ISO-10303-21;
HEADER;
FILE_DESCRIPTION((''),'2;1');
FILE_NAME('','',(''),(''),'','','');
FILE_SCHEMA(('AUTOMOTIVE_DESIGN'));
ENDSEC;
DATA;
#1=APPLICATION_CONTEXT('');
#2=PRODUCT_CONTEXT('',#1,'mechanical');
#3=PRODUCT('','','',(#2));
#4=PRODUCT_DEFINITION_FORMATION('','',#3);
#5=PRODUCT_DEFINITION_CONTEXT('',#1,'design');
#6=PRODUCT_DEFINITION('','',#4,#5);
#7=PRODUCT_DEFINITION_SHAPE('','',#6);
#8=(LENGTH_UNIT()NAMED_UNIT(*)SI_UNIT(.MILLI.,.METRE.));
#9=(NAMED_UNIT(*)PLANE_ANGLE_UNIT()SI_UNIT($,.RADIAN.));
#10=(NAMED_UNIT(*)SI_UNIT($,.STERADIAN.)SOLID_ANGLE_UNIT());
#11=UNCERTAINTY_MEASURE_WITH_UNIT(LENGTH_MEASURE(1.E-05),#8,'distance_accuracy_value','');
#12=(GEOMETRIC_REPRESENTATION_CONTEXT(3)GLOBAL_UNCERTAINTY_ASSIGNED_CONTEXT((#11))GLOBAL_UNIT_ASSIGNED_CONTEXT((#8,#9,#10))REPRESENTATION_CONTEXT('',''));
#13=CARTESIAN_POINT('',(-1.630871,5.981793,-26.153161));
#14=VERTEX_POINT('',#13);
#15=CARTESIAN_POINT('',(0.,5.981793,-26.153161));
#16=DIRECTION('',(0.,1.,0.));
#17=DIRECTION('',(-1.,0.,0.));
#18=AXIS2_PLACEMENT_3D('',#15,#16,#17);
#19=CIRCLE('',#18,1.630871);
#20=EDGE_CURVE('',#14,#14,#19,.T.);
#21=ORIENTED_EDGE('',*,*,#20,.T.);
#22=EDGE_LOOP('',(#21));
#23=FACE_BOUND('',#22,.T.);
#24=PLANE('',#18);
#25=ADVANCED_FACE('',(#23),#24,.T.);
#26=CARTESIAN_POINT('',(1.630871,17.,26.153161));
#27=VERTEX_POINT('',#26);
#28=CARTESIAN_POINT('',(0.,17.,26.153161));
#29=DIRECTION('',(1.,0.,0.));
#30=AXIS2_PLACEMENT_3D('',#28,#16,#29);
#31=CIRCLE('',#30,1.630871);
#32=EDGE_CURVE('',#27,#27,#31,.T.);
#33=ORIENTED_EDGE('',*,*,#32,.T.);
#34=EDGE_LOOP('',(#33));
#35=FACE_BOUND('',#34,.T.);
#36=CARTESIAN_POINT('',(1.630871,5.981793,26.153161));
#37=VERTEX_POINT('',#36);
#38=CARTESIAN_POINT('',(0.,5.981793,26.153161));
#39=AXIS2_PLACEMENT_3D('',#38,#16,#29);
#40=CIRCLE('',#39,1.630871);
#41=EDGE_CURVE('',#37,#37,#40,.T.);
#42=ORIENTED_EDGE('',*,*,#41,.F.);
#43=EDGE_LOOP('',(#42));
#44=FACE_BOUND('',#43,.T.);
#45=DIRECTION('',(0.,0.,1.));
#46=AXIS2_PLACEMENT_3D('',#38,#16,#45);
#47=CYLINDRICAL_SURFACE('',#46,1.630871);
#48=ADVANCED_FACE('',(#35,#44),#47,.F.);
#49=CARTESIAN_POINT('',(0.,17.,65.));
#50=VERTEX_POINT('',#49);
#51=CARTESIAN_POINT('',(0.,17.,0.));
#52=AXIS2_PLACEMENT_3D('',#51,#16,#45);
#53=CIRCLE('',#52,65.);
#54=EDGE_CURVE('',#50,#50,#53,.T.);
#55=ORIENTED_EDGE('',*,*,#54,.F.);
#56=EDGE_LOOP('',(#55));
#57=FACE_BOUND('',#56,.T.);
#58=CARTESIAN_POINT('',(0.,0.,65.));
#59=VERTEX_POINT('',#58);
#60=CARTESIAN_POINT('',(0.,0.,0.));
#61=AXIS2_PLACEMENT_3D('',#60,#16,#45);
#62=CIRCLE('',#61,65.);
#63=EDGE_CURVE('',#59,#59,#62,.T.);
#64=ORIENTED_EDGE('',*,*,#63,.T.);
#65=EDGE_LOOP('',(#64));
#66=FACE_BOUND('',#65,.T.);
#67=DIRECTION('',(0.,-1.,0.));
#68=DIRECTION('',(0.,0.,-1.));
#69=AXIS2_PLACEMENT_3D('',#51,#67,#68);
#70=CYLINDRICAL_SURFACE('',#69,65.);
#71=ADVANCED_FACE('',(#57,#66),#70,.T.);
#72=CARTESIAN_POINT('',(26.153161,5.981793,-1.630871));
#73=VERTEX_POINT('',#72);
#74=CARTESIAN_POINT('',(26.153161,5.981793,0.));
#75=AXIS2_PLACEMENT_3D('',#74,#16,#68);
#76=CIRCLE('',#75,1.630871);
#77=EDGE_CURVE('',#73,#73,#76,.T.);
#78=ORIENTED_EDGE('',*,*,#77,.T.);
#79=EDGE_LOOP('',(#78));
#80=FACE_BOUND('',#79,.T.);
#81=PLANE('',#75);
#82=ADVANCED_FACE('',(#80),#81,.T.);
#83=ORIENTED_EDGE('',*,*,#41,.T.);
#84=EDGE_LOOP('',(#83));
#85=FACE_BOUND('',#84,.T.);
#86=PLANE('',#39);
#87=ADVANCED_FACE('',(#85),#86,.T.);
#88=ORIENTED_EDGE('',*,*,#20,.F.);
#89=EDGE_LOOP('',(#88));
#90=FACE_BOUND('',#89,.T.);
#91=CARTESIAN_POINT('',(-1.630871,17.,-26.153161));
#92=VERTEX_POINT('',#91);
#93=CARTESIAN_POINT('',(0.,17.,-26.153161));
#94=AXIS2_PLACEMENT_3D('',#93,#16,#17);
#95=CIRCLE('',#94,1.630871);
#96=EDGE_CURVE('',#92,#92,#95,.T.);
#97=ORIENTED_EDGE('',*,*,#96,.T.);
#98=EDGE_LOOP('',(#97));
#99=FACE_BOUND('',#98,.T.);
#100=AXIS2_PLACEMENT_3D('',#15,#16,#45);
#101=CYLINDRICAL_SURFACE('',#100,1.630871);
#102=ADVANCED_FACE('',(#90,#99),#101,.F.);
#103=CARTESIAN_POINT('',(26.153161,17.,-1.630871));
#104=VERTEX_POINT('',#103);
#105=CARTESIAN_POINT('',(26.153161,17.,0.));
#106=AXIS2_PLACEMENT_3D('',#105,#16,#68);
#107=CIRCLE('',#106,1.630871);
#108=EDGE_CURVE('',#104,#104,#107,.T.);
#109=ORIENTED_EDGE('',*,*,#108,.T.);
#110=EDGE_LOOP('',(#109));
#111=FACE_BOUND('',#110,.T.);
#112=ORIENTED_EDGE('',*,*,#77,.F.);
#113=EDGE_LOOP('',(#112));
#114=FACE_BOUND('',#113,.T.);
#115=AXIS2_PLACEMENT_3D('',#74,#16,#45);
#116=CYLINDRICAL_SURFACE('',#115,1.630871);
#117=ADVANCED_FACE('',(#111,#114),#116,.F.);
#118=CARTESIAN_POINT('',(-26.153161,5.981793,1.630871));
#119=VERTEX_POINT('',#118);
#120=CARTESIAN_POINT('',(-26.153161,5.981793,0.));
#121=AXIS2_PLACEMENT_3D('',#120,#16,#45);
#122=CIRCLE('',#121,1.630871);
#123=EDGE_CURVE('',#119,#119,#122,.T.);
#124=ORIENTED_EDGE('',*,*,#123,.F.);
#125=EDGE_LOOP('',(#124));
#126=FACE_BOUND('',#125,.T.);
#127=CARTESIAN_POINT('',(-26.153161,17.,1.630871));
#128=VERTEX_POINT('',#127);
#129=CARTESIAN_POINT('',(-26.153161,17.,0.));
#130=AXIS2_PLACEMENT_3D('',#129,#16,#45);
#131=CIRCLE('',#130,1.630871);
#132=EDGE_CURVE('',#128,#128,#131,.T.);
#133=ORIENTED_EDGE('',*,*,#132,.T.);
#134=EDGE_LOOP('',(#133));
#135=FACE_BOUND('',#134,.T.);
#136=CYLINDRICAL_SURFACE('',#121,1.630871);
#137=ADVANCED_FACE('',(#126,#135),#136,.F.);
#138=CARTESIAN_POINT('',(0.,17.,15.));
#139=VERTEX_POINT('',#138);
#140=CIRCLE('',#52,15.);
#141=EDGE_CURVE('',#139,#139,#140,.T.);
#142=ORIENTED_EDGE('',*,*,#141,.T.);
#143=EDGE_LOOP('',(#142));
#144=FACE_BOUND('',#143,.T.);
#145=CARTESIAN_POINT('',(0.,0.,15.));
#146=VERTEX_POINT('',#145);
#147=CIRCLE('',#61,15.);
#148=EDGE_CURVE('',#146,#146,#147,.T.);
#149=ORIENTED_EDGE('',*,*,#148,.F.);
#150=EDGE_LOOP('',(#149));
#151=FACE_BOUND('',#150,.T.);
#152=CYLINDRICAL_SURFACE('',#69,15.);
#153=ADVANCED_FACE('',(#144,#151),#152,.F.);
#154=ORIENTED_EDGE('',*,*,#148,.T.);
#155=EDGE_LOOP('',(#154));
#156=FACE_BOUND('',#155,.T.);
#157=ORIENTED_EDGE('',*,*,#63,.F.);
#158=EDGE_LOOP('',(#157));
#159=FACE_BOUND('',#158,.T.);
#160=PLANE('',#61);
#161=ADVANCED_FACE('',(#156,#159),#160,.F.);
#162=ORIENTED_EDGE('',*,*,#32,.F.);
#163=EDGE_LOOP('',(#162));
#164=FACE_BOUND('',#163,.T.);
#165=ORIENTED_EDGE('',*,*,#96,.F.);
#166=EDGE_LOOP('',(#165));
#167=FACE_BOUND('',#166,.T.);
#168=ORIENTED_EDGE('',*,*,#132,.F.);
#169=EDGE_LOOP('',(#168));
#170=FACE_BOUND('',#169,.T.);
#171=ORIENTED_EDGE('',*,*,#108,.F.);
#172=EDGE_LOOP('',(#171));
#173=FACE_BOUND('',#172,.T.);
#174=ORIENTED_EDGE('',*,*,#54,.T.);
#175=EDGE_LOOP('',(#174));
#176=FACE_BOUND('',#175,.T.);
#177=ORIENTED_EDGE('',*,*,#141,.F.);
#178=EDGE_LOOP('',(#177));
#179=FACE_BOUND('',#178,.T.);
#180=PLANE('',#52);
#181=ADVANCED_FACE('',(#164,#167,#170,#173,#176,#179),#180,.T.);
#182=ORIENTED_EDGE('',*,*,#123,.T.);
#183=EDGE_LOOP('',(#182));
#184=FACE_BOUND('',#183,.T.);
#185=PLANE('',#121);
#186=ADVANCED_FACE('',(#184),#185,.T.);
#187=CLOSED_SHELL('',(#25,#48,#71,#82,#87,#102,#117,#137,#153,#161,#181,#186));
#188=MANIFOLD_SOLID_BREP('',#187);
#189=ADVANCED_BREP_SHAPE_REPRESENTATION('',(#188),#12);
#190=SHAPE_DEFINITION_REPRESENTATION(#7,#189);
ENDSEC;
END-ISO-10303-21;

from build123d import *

# Parameters (mm, degrees)
SKETCH1_R           = 65
BOSS_EXTRUDE1_DEPTH = 17
SKETCH2_R           = 15
CUT_EXTRUDE1_DEPTH  = 94.482618705
SKETCH3_R           = 1.630870724
CUT_EXTRUDE2_DEPTH  = 11.018207346
CIRPATTERN1_COUNT   = 4


with BuildPart() as part:
    # Sketch1 → Boss-Extrude1 (new body)
    with BuildSketch(Plane(origin=(0, 0, 0), x_dir=(1, 0, 0), z_dir=(0, 1, 0))):
        Circle(SKETCH1_R)
    extrude(amount=BOSS_EXTRUDE1_DEPTH)

    # Sketch2 → Cut-Extrude1 (cut, through all)
    with BuildSketch(Plane(origin=(0, 0, 0), x_dir=(1, 0, 0), z_dir=(0, 1, 0))):
        Circle(SKETCH2_R)
    extrude(amount=CUT_EXTRUDE1_DEPTH, mode=Mode.SUBTRACT)

    # Sketch3 → Cut-Extrude2 (cut)
    with BuildSketch(Plane(origin=(0, 17, 0), x_dir=(1, 0, 0), z_dir=(0, 1, 0))):
        with Locations((-26.15316058, 0)):
            Circle(SKETCH3_R)
    cut_extrude2 = extrude(amount=-CUT_EXTRUDE2_DEPTH, mode=Mode.SUBTRACT)

    # CirPattern1: Cut-Extrude2 ×4 about axis
    cirpattern1_axis = Axis((0, 0, 0), (0, 1, 0))
    for i in range(1, CIRPATTERN1_COUNT):
        add(cut_extrude2.rotate(cirpattern1_axis, i * 360 / CIRPATTERN1_COUNT), mode=Mode.SUBTRACT)


solid = part.part
